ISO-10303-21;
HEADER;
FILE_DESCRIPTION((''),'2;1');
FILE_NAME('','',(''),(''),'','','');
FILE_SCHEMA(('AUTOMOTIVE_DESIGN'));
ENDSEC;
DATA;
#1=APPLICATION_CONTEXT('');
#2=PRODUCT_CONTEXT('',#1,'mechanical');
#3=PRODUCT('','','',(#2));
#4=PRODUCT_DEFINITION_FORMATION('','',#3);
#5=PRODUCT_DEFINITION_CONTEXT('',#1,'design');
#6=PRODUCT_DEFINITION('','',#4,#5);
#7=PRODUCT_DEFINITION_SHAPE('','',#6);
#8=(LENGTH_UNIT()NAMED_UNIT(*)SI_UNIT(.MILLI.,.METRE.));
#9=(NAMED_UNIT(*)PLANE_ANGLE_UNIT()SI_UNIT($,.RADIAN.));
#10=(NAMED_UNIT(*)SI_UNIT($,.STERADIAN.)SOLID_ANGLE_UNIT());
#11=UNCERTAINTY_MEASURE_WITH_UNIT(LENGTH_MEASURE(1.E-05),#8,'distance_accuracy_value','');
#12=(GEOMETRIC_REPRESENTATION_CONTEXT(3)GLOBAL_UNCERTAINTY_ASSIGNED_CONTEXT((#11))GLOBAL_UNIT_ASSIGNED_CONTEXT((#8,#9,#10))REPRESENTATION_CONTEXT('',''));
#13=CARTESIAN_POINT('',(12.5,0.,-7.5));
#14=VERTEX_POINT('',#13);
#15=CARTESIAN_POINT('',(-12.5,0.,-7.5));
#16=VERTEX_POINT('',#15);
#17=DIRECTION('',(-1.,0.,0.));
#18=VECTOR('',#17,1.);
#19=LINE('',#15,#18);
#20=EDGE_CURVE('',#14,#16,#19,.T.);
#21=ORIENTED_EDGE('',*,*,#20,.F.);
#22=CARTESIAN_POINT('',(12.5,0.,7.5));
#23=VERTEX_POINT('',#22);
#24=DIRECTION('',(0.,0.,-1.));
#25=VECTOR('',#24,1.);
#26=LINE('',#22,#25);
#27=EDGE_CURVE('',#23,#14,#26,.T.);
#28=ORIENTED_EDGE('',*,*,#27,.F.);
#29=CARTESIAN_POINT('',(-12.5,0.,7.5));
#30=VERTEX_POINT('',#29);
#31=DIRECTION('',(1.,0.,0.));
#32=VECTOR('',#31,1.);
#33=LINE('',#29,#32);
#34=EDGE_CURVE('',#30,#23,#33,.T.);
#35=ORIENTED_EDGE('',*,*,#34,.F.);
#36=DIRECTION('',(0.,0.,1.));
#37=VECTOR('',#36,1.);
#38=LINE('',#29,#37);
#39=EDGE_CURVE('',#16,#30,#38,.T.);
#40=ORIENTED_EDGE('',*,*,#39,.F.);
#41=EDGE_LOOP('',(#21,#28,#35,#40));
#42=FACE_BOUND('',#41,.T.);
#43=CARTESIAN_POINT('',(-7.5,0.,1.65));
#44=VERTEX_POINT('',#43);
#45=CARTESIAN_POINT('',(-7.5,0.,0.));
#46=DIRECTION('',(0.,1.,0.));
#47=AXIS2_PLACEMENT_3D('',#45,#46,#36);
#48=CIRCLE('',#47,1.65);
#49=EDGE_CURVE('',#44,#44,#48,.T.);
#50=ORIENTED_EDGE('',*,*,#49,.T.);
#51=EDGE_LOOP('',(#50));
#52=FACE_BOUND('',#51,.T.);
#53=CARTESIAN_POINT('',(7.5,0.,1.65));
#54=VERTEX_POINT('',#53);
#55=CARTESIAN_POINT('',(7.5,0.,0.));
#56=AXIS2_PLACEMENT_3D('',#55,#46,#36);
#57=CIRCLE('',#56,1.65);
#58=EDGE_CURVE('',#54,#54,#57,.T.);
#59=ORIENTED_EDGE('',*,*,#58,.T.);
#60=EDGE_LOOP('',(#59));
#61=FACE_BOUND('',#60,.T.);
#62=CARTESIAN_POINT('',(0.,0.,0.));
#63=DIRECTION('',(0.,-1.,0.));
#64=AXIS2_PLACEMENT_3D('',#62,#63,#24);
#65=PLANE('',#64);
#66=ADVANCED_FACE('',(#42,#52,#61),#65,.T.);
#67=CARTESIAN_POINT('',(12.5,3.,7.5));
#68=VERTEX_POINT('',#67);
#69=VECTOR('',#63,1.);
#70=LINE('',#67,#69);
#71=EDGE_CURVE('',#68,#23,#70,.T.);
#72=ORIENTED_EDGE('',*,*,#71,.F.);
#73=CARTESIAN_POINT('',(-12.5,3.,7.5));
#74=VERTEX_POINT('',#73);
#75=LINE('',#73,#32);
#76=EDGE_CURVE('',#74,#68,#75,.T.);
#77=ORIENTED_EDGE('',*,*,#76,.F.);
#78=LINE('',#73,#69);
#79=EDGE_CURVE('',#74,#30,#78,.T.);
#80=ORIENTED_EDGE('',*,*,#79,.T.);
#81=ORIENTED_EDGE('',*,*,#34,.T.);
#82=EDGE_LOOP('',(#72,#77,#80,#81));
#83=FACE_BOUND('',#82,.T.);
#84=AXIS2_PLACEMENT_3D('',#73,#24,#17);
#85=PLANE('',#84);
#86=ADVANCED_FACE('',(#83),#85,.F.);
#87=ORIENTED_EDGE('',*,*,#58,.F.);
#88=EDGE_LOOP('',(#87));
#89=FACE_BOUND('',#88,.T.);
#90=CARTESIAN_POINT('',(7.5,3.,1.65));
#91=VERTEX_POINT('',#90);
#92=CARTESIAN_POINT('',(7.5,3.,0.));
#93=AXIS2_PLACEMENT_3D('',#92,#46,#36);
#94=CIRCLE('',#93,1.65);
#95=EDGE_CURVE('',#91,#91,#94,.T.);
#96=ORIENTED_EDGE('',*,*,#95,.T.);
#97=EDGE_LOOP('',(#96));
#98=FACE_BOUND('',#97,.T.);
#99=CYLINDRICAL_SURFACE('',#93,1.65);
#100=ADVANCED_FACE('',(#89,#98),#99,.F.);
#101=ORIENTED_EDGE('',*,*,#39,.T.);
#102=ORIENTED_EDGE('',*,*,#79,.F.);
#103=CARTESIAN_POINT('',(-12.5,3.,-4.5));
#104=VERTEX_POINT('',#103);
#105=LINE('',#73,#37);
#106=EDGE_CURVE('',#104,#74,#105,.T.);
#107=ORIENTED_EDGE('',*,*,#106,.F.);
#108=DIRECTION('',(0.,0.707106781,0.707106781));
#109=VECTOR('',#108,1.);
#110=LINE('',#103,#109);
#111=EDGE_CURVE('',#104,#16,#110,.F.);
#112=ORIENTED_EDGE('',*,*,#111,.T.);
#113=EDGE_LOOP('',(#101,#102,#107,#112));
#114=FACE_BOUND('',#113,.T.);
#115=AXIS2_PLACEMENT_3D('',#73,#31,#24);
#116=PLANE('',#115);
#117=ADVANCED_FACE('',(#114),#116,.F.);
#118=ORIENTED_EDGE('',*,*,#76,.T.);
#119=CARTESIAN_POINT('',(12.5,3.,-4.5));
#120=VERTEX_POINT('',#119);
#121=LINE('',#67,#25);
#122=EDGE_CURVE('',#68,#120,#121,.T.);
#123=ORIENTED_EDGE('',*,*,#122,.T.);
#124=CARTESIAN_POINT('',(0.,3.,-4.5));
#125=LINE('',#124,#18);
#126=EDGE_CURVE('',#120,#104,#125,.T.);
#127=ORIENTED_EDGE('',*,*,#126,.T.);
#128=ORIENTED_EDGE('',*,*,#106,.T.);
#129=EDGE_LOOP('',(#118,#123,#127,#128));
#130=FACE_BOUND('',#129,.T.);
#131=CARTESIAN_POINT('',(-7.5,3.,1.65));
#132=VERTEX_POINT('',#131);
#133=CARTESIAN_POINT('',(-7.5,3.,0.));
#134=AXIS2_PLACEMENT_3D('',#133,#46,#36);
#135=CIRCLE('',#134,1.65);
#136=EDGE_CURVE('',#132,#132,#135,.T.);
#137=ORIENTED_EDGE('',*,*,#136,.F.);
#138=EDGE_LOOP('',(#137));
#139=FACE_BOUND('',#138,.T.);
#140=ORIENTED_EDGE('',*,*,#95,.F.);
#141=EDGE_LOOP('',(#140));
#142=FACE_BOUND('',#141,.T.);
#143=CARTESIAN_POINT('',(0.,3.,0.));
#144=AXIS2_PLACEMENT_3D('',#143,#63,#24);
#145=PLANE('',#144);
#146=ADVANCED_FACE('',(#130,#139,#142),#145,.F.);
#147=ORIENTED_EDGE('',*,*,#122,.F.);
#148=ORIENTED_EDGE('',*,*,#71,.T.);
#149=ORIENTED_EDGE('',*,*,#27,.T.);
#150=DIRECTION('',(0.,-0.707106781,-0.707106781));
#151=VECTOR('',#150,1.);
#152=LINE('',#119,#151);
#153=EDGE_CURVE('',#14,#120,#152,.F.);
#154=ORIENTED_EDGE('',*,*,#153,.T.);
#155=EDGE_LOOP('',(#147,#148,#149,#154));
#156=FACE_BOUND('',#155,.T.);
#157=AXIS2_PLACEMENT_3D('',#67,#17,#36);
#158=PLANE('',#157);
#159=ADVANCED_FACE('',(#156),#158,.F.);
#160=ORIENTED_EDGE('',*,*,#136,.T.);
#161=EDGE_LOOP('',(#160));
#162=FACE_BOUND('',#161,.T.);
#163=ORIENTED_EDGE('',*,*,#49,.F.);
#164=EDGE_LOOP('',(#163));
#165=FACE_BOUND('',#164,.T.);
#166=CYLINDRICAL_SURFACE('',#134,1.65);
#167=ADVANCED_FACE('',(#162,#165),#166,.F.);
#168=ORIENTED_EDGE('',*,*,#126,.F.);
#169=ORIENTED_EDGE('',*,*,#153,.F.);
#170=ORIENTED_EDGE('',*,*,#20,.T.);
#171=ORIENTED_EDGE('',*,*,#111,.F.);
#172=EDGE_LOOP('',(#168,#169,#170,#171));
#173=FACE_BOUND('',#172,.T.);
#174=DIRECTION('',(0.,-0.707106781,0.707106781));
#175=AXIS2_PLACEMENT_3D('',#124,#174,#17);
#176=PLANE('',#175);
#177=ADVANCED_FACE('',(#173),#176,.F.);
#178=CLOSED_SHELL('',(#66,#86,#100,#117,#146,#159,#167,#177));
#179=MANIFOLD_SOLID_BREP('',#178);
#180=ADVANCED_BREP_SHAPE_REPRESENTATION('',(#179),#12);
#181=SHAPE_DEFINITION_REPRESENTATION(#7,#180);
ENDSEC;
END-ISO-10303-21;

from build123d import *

# Parameters (mm, degrees)
SKETCH1_W             = 25
SKETCH1_H             = 15
BOSS_EXTRUDE1_DEPTH   = 3
M4X0_7_TAPPED_HOLE1_D = 3.3
CHAMFER1_SIZE         = 3


with BuildPart() as part:
    # Sketch1 → Boss-Extrude1 (new body)
    with BuildSketch(Plane(origin=(0, 0, 0), x_dir=(1, 0, 0), z_dir=(0, 1, 0))):
        Rectangle(SKETCH1_W, SKETCH1_H)
    extrude(amount=BOSS_EXTRUDE1_DEPTH)

    # M4x0.7 Tapped Hole1 (through all)
    with Locations(Plane(origin=(0, 3, 0), x_dir=(1, 0, 0), z_dir=(0, 1, 0))):
        with Locations((-7.5, 0), (7.5, 0)):
            Hole(M4X0_7_TAPPED_HOLE1_D / 2)

    # Chamfer1
    chamfer1_edges = [part.edges().sort_by_distance(p)[0] for p in [
        (0, 3, -7.5),
    ]]
    chamfer(chamfer1_edges, length=CHAMFER1_SIZE - 0.0001)  # a hair under: the kernel refuses the full size


solid = part.part
